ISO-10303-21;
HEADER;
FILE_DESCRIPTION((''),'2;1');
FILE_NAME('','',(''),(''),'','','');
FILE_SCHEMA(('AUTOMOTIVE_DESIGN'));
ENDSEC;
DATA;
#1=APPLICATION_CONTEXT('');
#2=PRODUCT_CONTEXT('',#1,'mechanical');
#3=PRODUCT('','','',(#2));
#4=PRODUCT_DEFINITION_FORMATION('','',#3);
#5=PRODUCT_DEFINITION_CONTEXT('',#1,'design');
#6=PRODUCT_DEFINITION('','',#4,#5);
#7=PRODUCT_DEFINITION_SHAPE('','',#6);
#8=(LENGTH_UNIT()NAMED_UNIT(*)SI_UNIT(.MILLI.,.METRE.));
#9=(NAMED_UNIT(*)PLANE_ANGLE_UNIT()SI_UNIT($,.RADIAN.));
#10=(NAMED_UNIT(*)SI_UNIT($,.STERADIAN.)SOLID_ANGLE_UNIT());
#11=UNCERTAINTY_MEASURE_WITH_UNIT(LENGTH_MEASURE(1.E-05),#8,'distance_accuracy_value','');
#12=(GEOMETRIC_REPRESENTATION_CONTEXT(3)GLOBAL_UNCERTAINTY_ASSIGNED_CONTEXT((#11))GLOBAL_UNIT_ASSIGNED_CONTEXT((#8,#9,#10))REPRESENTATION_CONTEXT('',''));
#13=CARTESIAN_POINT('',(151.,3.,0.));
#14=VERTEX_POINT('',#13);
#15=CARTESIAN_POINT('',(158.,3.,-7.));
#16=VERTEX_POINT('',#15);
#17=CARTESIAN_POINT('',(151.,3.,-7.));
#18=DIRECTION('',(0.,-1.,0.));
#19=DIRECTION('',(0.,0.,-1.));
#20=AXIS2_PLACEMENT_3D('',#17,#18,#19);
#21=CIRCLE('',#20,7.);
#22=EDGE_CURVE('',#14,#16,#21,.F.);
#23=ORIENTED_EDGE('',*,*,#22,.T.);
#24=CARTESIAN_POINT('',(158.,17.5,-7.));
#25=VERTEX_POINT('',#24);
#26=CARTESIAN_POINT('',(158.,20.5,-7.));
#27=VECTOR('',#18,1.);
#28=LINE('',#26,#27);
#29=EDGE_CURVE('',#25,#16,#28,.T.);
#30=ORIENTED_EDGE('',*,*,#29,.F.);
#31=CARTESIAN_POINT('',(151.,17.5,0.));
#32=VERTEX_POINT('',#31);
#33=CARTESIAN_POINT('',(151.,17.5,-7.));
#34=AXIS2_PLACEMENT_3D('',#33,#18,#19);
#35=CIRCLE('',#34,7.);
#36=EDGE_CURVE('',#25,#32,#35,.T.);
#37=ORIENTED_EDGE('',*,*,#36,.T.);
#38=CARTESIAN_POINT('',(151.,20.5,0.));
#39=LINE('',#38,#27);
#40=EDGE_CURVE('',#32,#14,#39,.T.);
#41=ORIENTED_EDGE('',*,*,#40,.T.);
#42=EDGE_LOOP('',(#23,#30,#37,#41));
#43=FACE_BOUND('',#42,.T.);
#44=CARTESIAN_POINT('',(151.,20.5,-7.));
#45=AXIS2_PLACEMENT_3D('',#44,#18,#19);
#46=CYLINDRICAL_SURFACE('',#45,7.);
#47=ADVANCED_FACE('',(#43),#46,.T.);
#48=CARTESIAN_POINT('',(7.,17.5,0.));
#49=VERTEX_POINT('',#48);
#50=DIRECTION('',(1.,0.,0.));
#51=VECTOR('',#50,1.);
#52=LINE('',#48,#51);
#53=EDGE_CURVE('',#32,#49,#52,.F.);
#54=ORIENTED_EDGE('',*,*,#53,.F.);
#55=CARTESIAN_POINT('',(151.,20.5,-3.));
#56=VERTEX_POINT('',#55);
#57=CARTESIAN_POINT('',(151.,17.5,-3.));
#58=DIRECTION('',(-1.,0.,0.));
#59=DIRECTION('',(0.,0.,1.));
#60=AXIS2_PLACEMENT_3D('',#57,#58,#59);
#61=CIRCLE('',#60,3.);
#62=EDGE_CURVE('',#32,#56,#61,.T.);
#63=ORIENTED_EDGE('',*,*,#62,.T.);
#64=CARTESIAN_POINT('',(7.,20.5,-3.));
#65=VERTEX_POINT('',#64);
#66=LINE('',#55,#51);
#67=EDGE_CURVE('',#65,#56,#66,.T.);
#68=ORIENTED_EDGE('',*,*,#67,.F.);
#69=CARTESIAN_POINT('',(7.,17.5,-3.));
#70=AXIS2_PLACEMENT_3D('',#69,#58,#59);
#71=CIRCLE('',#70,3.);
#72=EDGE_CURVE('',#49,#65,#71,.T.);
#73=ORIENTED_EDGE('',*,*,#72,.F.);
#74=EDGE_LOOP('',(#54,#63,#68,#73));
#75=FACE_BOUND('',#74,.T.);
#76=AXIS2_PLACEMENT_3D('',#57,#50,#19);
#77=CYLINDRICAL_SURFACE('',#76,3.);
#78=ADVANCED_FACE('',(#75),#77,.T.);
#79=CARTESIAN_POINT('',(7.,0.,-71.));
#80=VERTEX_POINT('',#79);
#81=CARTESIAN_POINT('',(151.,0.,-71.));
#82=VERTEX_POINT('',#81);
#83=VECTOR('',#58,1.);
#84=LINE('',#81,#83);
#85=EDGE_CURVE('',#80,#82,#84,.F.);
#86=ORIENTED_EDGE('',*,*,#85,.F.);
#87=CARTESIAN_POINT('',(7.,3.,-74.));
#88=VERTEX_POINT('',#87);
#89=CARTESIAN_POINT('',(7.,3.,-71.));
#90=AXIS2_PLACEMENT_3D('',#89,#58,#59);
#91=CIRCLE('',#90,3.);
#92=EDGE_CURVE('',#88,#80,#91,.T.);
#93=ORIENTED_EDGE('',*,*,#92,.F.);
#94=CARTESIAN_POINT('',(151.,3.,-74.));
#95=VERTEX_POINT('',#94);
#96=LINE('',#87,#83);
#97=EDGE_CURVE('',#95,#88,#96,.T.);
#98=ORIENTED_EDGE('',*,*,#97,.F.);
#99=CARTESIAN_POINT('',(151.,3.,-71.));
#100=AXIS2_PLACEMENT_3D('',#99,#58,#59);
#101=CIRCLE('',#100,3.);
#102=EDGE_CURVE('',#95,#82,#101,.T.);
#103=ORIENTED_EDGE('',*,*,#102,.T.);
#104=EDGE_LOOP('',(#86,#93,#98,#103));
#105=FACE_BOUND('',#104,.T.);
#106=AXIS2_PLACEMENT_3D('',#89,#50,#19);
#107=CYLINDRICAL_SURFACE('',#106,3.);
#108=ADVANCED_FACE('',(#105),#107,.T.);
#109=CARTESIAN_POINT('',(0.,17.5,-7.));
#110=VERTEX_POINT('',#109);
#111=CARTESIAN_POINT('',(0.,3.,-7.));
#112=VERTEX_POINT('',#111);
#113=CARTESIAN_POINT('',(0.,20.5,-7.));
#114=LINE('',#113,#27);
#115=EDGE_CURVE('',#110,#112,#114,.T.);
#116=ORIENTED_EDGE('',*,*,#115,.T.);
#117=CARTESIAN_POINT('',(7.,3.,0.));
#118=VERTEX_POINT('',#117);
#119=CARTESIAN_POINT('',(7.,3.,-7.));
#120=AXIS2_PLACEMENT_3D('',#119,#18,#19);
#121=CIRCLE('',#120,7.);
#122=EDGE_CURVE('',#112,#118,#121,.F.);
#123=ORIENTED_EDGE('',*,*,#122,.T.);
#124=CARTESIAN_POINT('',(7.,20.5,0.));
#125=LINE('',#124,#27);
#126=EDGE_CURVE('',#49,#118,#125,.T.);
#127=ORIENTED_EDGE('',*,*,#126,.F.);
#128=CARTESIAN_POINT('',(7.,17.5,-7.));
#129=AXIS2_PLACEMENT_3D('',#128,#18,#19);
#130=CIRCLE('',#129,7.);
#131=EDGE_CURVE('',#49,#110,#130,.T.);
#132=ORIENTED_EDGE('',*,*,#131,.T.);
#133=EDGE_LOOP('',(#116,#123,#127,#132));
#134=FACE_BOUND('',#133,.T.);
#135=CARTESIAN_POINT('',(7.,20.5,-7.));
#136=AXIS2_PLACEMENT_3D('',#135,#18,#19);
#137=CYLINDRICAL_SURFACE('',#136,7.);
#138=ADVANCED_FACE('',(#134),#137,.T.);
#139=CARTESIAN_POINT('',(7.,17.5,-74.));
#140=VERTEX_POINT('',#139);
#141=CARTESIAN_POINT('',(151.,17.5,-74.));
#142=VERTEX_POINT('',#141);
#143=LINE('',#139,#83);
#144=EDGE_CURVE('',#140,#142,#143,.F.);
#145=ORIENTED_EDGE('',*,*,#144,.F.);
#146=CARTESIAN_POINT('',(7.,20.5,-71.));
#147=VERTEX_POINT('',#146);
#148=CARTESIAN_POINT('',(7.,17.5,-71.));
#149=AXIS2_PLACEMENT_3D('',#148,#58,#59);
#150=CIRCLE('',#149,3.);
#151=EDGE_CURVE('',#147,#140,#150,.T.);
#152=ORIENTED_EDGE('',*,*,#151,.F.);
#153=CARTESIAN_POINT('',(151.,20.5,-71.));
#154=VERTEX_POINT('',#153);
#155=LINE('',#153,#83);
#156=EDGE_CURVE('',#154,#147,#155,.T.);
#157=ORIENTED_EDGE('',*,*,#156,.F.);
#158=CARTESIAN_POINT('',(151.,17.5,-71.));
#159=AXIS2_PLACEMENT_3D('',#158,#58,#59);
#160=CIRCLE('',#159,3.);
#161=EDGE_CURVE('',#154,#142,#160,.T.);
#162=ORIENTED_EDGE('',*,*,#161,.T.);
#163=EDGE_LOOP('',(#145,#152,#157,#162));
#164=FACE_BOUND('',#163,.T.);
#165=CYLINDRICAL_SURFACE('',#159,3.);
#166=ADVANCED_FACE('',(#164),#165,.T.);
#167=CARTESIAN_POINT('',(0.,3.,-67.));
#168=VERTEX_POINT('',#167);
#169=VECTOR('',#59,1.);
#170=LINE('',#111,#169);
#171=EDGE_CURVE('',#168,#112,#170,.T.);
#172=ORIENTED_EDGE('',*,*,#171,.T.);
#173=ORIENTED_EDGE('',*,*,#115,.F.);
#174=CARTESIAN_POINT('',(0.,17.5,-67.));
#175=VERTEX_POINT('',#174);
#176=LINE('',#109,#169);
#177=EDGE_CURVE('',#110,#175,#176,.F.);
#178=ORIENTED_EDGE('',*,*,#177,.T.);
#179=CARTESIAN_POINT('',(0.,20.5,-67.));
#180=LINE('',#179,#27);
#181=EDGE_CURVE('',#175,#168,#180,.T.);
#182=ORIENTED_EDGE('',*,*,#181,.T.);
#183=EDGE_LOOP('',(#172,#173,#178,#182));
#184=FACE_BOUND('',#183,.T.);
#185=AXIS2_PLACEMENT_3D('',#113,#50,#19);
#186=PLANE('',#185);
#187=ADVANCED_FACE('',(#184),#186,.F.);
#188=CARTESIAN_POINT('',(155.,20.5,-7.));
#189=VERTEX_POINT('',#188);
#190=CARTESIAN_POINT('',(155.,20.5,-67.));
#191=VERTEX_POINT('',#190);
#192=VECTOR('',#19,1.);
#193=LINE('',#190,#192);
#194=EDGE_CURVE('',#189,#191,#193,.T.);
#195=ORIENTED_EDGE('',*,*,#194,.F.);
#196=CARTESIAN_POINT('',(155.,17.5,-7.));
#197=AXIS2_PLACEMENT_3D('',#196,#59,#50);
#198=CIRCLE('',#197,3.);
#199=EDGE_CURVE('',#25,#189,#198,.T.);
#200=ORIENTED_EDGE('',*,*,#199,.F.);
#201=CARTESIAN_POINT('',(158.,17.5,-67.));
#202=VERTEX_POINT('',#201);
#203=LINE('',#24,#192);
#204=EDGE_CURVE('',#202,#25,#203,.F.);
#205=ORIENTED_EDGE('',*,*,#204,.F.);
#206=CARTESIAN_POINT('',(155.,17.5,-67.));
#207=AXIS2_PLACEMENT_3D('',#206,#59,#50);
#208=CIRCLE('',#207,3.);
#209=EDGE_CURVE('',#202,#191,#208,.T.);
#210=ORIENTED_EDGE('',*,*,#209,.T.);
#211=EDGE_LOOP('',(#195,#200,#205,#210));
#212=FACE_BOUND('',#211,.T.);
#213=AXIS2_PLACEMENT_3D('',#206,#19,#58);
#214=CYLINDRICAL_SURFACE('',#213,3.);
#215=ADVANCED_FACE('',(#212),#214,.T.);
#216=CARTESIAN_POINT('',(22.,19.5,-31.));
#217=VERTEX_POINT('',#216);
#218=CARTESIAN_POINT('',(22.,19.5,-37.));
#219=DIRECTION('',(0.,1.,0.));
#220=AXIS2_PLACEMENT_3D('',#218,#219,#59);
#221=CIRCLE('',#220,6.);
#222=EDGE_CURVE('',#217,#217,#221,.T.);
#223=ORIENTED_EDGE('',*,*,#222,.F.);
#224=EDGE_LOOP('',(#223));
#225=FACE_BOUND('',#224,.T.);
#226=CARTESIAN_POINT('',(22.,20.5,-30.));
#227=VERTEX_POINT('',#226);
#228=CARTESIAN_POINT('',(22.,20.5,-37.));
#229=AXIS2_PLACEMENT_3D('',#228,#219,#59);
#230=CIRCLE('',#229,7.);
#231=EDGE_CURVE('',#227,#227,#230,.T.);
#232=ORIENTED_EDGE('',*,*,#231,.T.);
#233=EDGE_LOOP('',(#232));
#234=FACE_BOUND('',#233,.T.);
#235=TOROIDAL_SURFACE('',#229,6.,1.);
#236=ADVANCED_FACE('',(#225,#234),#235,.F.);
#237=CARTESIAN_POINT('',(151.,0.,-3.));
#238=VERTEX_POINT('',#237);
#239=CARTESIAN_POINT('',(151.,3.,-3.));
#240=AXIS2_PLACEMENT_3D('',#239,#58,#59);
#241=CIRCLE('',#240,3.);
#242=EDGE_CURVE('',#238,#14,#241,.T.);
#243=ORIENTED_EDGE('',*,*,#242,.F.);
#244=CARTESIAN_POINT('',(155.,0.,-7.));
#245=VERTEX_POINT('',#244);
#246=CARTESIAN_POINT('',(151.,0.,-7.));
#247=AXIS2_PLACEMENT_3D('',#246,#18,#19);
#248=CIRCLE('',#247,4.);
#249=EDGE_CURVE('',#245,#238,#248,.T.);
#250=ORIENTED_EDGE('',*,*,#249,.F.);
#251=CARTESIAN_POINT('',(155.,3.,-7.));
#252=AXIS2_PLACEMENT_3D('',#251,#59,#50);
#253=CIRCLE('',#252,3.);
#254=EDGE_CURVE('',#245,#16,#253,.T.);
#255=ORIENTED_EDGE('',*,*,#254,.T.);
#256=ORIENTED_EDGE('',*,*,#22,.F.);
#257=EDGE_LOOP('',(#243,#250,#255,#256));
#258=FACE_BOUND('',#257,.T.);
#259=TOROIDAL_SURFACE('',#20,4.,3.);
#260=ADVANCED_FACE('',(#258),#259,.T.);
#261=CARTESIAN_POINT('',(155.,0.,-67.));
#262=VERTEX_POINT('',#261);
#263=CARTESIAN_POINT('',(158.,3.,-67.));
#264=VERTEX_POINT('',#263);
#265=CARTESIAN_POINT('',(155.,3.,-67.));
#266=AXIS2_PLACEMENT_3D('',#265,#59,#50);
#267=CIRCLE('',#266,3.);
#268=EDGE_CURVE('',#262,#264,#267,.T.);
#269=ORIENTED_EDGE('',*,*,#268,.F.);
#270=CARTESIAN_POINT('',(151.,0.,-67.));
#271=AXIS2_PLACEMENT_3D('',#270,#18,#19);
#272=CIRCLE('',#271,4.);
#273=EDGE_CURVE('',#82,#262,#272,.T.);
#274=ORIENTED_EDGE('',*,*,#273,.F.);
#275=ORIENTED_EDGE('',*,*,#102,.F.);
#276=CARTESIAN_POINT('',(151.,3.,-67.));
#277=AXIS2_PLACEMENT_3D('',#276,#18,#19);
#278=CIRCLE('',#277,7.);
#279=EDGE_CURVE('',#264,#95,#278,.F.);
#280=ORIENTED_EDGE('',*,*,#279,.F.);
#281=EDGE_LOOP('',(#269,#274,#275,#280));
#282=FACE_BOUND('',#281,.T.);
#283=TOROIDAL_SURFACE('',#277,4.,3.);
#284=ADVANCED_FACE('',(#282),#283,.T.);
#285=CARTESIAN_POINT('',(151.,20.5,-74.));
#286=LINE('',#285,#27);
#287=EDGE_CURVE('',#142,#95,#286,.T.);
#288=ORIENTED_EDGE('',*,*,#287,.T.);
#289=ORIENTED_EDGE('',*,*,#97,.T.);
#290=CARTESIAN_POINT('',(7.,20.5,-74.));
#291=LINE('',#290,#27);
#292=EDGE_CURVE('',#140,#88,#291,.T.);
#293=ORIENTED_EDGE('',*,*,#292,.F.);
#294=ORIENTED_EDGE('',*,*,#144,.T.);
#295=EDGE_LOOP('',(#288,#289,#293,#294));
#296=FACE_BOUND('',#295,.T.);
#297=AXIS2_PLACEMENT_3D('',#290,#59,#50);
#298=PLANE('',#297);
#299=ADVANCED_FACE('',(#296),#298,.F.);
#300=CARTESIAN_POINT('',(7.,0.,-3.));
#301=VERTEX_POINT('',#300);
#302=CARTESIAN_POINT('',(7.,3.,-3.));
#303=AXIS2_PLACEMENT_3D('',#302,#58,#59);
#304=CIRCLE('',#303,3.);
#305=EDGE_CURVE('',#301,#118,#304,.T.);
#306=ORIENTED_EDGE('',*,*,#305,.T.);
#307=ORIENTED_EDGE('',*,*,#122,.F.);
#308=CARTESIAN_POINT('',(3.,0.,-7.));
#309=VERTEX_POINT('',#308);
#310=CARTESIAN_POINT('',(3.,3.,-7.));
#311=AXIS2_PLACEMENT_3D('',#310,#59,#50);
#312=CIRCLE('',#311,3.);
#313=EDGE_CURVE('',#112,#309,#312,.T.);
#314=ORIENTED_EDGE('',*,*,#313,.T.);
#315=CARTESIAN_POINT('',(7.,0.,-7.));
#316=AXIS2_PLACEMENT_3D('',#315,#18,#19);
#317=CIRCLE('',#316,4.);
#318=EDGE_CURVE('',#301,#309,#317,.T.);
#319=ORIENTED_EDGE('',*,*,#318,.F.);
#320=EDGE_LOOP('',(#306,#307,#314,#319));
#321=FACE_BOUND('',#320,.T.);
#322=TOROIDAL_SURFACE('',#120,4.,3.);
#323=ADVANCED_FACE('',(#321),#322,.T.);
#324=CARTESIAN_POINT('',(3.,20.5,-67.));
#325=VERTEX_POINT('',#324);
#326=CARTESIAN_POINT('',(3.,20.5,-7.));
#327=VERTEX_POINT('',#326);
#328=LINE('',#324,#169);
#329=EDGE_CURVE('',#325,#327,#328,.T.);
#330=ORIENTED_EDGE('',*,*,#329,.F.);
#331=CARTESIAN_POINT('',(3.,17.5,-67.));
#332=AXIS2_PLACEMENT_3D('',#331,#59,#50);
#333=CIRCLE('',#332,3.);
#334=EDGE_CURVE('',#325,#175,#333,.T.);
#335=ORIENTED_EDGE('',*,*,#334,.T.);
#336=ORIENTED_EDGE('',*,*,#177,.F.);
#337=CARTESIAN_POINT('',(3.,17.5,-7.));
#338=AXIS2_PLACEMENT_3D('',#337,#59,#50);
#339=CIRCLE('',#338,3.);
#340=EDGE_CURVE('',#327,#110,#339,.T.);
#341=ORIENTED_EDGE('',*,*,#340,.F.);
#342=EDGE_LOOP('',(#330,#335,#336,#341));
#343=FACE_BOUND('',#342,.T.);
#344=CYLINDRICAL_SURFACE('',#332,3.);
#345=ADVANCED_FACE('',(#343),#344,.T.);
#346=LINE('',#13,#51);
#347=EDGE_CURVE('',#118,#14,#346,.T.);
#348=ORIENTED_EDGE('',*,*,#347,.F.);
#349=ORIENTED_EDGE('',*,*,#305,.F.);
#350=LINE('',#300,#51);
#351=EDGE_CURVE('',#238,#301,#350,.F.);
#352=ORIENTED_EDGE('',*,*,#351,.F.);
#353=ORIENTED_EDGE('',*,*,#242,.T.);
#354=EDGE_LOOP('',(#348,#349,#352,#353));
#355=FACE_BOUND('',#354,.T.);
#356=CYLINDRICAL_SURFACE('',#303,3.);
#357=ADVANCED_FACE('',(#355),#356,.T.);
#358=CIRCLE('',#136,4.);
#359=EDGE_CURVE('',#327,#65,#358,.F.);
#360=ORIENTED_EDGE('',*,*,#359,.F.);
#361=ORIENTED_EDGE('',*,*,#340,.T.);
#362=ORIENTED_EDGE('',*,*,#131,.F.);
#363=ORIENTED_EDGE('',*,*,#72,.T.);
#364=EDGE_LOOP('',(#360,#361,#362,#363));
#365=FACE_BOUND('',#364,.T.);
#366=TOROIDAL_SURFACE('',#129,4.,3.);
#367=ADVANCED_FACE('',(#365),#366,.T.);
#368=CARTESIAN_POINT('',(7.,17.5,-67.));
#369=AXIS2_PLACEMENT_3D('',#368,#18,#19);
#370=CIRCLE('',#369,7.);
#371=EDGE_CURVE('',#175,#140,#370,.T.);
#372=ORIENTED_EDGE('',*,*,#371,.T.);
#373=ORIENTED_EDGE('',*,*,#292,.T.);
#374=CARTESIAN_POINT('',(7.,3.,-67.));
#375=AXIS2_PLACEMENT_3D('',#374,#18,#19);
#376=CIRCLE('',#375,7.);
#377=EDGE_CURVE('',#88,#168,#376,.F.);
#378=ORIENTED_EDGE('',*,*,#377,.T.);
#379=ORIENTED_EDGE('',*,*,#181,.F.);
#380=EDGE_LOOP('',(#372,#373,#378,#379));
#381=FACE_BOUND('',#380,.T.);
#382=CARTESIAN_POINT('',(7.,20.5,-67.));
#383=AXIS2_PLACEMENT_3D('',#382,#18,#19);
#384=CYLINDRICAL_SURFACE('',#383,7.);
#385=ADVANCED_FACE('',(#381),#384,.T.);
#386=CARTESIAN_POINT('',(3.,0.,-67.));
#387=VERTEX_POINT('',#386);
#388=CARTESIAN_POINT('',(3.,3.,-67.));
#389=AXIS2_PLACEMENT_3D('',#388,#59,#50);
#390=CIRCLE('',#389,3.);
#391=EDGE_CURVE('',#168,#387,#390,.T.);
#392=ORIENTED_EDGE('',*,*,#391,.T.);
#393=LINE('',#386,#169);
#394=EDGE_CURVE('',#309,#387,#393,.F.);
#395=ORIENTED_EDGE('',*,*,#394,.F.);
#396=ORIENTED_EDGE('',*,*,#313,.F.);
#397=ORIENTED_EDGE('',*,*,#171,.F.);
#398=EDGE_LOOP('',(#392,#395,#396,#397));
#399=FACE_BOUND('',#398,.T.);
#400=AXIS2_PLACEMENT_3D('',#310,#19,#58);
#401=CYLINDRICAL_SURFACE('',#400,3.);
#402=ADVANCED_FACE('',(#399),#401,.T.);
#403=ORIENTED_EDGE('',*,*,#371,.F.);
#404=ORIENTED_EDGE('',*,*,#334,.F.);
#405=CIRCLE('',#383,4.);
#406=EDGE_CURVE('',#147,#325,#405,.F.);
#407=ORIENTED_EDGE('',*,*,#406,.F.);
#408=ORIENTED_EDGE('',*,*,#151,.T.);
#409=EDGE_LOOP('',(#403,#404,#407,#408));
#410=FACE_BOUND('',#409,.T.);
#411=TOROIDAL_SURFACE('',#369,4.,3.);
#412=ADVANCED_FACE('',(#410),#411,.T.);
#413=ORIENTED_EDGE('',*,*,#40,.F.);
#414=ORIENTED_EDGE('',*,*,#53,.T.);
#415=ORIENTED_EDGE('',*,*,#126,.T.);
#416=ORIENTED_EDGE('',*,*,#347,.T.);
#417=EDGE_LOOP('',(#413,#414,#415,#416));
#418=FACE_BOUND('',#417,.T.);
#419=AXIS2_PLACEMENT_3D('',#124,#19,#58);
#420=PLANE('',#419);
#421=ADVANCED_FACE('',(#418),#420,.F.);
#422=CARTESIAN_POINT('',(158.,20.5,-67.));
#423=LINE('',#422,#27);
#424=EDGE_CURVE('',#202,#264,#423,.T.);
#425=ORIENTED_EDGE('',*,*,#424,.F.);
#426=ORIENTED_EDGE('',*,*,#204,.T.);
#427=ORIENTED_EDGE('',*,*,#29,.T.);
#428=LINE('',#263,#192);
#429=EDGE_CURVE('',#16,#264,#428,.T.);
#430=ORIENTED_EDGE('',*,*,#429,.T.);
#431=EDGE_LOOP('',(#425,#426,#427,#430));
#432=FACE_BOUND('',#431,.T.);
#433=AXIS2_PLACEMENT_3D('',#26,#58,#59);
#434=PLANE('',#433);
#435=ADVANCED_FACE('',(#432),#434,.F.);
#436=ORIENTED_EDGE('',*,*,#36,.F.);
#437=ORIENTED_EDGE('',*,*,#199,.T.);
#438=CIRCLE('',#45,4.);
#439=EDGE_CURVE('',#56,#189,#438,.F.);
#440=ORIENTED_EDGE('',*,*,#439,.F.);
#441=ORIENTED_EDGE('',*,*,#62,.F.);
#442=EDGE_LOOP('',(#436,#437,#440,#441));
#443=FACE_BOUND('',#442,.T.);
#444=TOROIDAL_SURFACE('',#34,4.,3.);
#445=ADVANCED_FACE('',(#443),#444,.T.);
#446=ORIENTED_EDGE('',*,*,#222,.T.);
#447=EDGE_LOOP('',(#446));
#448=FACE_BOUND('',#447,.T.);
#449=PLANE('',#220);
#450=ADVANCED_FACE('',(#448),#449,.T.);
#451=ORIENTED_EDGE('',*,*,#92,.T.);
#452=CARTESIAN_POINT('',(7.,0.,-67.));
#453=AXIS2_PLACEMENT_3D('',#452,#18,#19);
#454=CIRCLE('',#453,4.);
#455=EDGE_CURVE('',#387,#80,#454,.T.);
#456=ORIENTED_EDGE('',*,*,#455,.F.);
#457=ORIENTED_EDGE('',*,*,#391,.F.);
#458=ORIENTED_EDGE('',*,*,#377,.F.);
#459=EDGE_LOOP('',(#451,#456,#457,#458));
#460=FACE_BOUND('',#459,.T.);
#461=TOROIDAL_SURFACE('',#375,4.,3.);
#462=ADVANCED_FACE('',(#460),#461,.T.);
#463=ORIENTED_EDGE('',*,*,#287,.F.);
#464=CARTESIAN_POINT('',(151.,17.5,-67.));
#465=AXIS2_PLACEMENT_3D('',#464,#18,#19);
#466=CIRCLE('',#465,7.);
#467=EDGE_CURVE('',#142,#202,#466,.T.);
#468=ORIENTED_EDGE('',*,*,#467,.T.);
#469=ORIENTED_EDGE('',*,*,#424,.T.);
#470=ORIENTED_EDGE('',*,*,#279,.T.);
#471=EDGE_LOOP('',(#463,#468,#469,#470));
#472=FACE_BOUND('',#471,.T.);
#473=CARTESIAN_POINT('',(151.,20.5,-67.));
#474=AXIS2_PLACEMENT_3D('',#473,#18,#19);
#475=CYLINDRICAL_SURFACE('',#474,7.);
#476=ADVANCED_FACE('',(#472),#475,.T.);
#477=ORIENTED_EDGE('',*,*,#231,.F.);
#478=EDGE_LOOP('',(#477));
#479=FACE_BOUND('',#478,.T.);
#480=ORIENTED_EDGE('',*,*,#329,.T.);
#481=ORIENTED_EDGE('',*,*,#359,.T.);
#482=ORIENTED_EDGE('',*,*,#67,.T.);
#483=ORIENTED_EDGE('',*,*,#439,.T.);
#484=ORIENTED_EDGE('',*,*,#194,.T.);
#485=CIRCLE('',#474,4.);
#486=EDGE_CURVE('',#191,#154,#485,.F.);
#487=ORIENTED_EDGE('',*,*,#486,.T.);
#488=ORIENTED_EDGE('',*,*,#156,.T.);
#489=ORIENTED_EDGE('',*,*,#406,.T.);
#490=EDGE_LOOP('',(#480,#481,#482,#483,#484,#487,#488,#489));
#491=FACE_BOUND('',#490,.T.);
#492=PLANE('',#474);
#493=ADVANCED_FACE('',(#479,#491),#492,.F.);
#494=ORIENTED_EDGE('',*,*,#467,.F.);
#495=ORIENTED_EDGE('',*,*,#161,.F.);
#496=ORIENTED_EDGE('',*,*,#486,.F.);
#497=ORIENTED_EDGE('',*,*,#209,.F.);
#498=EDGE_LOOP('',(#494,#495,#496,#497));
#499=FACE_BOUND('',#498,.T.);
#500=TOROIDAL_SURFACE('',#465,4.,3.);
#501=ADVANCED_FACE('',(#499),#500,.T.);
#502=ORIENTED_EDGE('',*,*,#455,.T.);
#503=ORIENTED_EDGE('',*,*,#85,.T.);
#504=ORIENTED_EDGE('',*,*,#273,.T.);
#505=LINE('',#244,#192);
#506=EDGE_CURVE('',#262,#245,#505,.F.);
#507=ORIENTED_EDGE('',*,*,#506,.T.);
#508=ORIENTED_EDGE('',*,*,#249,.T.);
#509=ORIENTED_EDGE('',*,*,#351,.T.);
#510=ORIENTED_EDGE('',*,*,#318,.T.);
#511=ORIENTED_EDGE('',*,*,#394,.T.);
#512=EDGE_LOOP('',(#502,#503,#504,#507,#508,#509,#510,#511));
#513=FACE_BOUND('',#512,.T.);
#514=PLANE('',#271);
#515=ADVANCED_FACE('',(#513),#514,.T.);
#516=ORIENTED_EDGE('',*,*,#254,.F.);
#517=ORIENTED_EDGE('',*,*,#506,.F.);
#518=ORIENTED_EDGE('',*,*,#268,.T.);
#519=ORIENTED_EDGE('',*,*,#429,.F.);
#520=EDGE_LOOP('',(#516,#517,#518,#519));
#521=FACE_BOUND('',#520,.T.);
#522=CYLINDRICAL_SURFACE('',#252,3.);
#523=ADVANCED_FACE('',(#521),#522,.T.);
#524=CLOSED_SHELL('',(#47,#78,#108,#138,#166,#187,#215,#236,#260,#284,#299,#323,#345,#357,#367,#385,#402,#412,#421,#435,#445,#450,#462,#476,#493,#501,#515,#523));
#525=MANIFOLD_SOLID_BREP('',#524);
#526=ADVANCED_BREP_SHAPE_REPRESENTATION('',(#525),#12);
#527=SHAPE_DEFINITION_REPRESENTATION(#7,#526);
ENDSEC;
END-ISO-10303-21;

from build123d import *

# Parameters (mm, degrees)
BOSS_EXTRUDE1_DEPTH = 20.5
FILLET1_R           = 3
SKETCH2_R           = 7
CUT_EXTRUDE1_DEPTH  = 1
FILLET2_R           = 1


with BuildPart() as part:
    # Sketch1 → Boss-Extrude1 (new body)
    with BuildSketch(Plane(origin=(0, 0, 0), x_dir=(1, 0, 0), z_dir=(0, 1, 0))):
        with BuildLine():
            Line((7, 0), (151, 0))
            ThreePointArc((151, 0), (155.949747468, 2.050252532), (158, 7))
            Line((158, 7), (158, 67))
            ThreePointArc((158, 67), (155.949747468, 71.949747468), (151, 74))
            Line((151, 74), (7, 74))
            ThreePointArc((7, 74), (2.050252532, 71.949747468), (0, 67))
            Line((0, 67), (0, 7))
            ThreePointArc((0, 7), (2.050252532, 2.050252532), (7, 0))
        make_face()
    extrude(amount=BOSS_EXTRUDE1_DEPTH)

    # Fillet1
    fillet1_edges = [part.edges().sort_by_distance(p)[0] for p in [
        (0, 0, -37),
        (2.050252532, 0, -71.949747468),
        (79, 0, -74),
        (155.949747468, 0, -71.949747468),
        (2.050252532, 20.5, -71.949747468),
        (0, 20.5, -37),
        (2.050252532, 20.5, -2.050252532),
        (79, 20.5, 0),
        (155.949747468, 20.5, -2.050252532),
        (158, 20.5, -37),
        (155.949747468, 20.5, -71.949747468),
        (158, 0, -37),
        (79, 20.5, -74),
        (155.949747468, 0, -2.050252532),
        (79, 0, 0),
        (2.050252532, 0, -2.050252532),
    ]]
    fillet(fillet1_edges, radius=FILLET1_R)

    # Sketch2 → Cut-Extrude1 (cut)
    with BuildSketch(Plane(origin=(0, 20.5, 0), x_dir=(1, 0, 0), z_dir=(0, 1, 0))):
        with Locations(Location((22, 37, 0), (0, 0, 270))):
            Circle(SKETCH2_R)
    extrude(amount=-CUT_EXTRUDE1_DEPTH, mode=Mode.SUBTRACT)

    # Fillet2
    fillet2_edges = [part.edges().sort_by_distance(p)[0] for p in [
        (22, 19.5, -44),
    ]]
    fillet(fillet2_edges, radius=FILLET2_R - 0.0001)  # a hair under: the kernel refuses the full size


solid = part.part
